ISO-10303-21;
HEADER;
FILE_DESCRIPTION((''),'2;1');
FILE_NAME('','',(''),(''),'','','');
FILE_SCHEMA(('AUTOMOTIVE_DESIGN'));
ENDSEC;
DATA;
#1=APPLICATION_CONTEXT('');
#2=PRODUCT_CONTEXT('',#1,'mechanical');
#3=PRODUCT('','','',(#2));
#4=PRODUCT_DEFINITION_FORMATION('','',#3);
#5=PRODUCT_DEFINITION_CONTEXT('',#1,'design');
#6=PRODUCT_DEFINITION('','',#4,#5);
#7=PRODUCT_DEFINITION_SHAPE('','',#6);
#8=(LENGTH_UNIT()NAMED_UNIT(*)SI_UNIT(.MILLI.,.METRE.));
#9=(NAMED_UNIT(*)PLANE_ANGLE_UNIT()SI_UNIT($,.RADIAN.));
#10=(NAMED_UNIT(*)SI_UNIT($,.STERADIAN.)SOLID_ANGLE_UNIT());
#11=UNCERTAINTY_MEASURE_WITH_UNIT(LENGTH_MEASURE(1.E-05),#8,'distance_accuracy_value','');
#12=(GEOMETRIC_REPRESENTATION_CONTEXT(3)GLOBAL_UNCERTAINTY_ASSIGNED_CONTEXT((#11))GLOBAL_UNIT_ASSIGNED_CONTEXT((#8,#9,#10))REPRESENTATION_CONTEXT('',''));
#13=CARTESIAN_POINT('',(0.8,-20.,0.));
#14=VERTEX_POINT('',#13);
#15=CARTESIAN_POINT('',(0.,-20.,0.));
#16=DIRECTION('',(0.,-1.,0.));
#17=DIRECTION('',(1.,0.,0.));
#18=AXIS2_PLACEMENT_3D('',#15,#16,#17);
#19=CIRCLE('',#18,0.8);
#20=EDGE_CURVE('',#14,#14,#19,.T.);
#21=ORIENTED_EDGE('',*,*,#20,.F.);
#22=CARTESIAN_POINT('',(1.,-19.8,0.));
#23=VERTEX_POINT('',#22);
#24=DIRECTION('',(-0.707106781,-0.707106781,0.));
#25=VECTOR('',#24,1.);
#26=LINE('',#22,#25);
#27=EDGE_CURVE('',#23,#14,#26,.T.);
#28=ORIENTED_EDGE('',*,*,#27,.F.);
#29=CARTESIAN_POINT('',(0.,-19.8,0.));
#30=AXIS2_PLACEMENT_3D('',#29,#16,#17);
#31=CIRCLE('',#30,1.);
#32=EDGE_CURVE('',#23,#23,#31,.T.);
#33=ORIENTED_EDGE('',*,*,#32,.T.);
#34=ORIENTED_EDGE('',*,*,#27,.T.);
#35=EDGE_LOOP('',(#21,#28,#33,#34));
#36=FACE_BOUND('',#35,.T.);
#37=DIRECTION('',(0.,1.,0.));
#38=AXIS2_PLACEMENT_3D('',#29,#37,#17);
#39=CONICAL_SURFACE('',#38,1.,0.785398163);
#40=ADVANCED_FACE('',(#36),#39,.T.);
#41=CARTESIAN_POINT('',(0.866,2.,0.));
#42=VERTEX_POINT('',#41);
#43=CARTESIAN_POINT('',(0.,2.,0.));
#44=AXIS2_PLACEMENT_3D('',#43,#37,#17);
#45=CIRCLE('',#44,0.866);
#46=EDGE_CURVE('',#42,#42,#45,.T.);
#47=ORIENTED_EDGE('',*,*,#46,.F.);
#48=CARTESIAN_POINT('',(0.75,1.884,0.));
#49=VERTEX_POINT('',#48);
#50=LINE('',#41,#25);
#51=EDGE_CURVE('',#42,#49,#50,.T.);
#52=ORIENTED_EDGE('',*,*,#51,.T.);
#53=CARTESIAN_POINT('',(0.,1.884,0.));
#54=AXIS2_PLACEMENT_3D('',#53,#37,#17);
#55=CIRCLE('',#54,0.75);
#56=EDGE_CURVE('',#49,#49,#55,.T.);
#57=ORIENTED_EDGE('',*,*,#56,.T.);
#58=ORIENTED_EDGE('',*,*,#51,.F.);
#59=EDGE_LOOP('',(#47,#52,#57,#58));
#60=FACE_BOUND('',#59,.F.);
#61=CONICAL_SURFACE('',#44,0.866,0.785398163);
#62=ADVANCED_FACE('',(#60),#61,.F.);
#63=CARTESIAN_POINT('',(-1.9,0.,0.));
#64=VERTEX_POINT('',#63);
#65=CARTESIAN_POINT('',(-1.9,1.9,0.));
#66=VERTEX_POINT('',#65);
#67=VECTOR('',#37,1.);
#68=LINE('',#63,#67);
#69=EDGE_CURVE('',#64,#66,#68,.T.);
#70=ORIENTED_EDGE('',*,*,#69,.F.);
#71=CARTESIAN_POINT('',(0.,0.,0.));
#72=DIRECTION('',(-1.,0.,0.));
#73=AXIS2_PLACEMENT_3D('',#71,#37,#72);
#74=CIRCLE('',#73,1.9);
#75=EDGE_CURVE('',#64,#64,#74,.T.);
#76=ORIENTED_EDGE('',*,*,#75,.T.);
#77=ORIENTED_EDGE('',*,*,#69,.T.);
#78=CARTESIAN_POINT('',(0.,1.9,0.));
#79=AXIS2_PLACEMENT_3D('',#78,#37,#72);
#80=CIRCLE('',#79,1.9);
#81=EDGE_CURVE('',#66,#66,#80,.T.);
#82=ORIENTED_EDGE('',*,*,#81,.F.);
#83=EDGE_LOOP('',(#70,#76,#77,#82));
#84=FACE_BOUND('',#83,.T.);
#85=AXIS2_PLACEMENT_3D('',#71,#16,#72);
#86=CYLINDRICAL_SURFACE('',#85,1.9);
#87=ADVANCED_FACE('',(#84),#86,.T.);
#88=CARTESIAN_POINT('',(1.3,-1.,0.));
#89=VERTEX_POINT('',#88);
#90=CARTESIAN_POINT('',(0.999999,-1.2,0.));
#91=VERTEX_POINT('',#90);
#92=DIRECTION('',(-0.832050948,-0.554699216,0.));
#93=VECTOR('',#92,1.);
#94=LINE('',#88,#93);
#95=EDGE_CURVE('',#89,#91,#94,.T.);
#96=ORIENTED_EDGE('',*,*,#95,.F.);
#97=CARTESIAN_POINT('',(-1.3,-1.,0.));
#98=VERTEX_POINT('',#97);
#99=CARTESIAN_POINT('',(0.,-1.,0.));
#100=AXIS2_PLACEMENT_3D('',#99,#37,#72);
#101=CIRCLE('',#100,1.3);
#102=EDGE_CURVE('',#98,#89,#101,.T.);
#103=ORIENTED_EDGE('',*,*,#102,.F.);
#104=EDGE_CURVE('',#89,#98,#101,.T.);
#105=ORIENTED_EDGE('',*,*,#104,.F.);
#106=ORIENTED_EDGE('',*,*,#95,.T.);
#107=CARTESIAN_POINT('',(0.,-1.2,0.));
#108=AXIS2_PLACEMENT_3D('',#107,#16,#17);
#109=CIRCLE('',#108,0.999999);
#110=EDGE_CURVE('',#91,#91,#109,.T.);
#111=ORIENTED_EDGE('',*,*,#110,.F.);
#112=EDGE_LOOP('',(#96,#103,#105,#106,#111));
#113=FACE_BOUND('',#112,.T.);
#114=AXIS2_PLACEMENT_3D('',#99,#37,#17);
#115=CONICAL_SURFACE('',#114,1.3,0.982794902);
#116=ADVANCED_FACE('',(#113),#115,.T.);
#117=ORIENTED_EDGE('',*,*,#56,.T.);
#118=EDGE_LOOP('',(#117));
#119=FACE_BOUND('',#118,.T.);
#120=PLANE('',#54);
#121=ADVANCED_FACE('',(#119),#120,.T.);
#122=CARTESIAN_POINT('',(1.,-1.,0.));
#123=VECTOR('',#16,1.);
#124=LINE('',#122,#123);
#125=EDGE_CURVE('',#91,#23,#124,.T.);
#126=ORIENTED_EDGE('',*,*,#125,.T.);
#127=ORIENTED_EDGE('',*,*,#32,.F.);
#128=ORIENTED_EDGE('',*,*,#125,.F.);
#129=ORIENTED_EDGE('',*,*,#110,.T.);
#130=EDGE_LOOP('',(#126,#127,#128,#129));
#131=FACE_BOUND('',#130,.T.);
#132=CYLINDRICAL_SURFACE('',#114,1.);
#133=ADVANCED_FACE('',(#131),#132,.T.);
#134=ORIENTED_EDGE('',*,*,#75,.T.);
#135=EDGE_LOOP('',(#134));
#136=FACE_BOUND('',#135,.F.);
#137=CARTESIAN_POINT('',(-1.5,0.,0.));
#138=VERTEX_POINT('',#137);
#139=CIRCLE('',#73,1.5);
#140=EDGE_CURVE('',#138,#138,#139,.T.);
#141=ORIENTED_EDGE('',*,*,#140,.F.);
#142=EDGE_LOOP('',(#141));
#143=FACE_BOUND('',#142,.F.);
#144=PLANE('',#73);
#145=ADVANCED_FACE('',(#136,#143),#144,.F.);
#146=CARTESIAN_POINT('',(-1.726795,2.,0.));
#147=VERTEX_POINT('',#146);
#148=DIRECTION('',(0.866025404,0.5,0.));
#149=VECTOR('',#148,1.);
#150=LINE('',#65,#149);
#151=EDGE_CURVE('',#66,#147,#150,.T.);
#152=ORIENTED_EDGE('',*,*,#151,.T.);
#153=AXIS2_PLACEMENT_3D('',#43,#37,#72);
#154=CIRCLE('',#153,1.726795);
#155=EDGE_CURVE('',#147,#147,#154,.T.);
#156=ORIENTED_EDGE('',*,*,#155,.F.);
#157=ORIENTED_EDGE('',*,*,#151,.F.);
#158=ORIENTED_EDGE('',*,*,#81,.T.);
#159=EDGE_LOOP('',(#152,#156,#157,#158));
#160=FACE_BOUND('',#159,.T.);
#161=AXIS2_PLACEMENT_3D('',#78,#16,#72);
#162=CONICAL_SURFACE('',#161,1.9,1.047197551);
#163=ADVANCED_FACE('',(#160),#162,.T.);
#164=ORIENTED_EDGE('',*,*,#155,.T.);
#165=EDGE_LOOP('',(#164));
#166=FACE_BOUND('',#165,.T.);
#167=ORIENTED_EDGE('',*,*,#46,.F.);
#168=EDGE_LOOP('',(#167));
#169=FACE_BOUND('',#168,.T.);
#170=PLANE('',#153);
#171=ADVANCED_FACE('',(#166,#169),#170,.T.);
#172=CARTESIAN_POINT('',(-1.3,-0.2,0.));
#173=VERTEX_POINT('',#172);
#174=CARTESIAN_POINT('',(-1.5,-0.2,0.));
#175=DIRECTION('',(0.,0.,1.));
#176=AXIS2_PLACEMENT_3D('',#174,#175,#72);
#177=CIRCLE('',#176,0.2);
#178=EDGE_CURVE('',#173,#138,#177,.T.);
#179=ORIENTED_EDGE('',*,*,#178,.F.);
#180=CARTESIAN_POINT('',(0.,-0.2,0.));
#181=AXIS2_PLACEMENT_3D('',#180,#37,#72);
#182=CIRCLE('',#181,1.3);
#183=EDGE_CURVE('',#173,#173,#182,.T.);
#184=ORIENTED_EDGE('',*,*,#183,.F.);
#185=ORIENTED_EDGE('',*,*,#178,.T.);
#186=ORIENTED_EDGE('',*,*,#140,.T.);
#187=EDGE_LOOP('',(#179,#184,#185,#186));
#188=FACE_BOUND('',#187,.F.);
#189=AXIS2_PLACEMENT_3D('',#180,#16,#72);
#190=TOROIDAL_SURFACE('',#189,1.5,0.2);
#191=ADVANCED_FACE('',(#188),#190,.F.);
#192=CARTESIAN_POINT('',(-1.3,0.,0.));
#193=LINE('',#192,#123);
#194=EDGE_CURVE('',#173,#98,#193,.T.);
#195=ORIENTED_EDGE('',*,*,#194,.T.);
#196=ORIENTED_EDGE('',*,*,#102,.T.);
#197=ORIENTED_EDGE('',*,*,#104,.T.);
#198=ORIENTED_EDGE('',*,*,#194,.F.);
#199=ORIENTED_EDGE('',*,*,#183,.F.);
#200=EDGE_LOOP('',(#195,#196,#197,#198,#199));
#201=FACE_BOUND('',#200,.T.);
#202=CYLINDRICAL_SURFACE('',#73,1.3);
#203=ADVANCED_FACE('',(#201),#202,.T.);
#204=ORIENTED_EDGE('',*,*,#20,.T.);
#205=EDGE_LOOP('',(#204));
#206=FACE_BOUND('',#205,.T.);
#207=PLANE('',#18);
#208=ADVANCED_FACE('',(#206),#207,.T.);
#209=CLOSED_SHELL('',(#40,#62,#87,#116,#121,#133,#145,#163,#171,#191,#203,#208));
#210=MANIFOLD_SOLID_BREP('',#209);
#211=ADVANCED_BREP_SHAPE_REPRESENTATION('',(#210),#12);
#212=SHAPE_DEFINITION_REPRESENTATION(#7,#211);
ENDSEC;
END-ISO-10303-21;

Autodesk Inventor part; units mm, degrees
ref_plane "YZ Plane" through (0, 0, 0) normal (1, 0, 0) x (0, 1, 0)
sketch "Sketch11" plane through (0, 0, 0) normal (0, 1, 0) x (-1, 0, 0)
  circle A0 centre (0, 0) radius 1.9
  dimension "d86" = 3.8
sketch "Sketch12" plane through (0, 0, 0) normal (0, 1, 0) x (-1, 0, 0)
  circle A0 centre (0, 0) radius 1.3
  dimension "d87" = 2.6
ref_plane "Work Plane4" through (0, 2, 0) normal (0, 1, 0) x (-1, 0, 0)
ref_plane "Work Plane5" through (0, 1.9, 0) normal (0, 1, 0) x (-1, 0, 0)
extrude "Head" add sketch "Sketch11" along normal blind 2
chamfer "Chamfer3" distance 0.1 angle 60 1 edges at (1.9, 2, 0) measured on face at (-1.8938, 1.3333, -0.1529)
sketch "Sketch6" plane through (0, 1.9, 0) normal (0, 1, 0) x (1, 0, 0)
  line L0 (0, 0) -> (-1.9, 0) construction
  line L1 (0, 0) -> (-2, 0) construction
  line L2 (-2, 0) -> (-2, 0.2)
  line L3 (-2, 0) -> (-2, -0.2)
  line L4 (-2, -0.2) -> (-1.8894, -0.2)
  line L5 (-2, 0.2) -> (-1.8894, 0.2)
  line L6 (-1.8894, -0.2) -> (-1.8894, 0.2)
  circle A0 centre (0, 0) radius 1.9 construction
  dimension "d34" = 1.9
  dimension "d35" = 2
  dimension "d36" = 0.2
  dimension "d37" = 0.2
  dimension "d40" = 0.1106
  dimension "d75" = 3.8
extrude "Grip Knurling" [suppressed]
fillet "Fillet3" [suppressed]
pattern_circular "Circular Pattern1" [suppressed]
pattern_circular "Circular Pattern2" [suppressed]
sketch "Label" plane through (0, 2, 0) normal (0, 1, 0) x (-1, 0, 0)
  circle A0 centre (0, 0) radius 0.866
  circle A1 centre (0, 0) radius 1.7268 projected
  dimension "shaftDiameter" = 2
  dimension "transitionDiameter" = 2.6
  dimension "d109" = 1.7321
feature "Bolt Designation" [suppressed]
sketch "Sketch2" plane through (0, 2, 0) normal (0, 1, 0) x (1, 0, 0)
  line L0 (0.75, -0.433) -> (0, -0.866)
  line L1 (0, -0.866) -> (-0.75, -0.433)
  line L2 (-0.75, -0.433) -> (-0.75, 0.433)
  line L3 (-0.75, 0.433) -> (0, 0.866)
  line L4 (0, 0.866) -> (0.75, 0.433)
  line L5 (0.75, 0.433) -> (0.75, -0.433)
  line L6 (-0.75, -0.433) -> (0.75, 0.433) construction
  point P0 (0, 0)
  point P1 (0, 0)
  dimension "d8" = 1.5
  dimension "d24" = 1.7321
  dimension "d85" = 0.866
extrude "HexagonSocket" [suppressed]
sketch "Sketch4" plane through (0, 2, 0) normal (0, 1, 0) x (1, 0, 0)
  circle A0 centre (0, 0) radius 0.866
  dimension "d25" = 1.7321
extrude "Socket_topTaper" cut sketch "Sketch4" against normal blind 0.116 draft -45
ref_plane "Work Plane8" through (0, 0.8, 0) normal (0, 1, 0) x (1, 0, 0)
sketch "Sketch10" plane through (0, 0.8, 0) normal (0, 1, 0) x (1, 0, 0)
  circle A0 centre (0, 0) radius 0.433
  dimension "d70" = 0.866
feature "Socket_bottomTaper" [suppressed]
extrude "Transition" add sketch "Sketch12" against normal blind 1
ref_plane "Work Plane9" through (0, -1, 0) normal (0, 1, 0) x (-1, 0, 0)
sketch "Sketch18" plane through (0, -1, 0) normal (0, -1, 0) x (1, 0, 0)
  circle A0 centre (0, 0) radius 1.3 projected
extrude "Extruded Angle" add sketch "Sketch18" along normal blind 0.2 draft -56.31
sketch "Sketch19" plane through (0, -1.2, 0) normal (0, -1, 0) x (1, 0, 0)
  circle A0 centre (0, 0) radius 1 projected
sketch "Sketch13" plane through (0, -1, 0) normal (0, -1, 0) x (1, 0, 0)
  circle A0 centre (0, 0) radius 1
  dimension "d92" = 2
extrude "Shaft" add sketch "Sketch13" along normal blind 19
fillet "Fillet4" radius 0.2 1 edges at (1.3, 0, 0)
chamfer "Chamfer4" distance 0.2 angle 45 1 edges at (-1, -20, 0)
thread "Thread1" size "M2x0.4" class "6g" standard "ISO Metric profile" full length
sketch "Sketch7" plane through (0, 0, 0) normal (0, 0, 1) x (1, 0, 0)
  line L0 (-1, 0.2) -> (1, 0.2) construction
  line L1 (-1, -20.4) -> (-0.7393, -20.5505)
  line L2 (-0.7393, -20.6495) -> (-1, -20.8)
  line L3 (-1, -20.8) -> (-1, -20.4)
  arc A0 (-0.7393, -20.6495) -> (-0.7393, -20.5505) centre (-0.7679, -20.6) ccw
  line L4 (-1, -19.8) -> (1, -19.8) projected
  point P0 (0, 0)
  point P1 (-0.8845, -20.6)
  point P2 (-0.6536, -20.6)
  dimension "d53" = 0.4
  dimension "d56" = 0.0571
  dimension "d124" = 0.6
  dimension "d125" = 0
feature "ModeledThreads" [suppressed]
extrude "Extrusion10" add sketch "Sketch19" against normal blind 1
equation "\"shaftDiameter\" = 2"
equation "\"transitionDiameter\" = 2.6"
equation "\"flangeCoupling_mountHoleDiameter\" = 3.9"
equation "\"headHeight\" = 2"
equation "\"headDiameter\" = 3.8"
equation "\"gap\" = 0.1"
equation "\"airgap\" = 0.4"
equation "\"wallgap\" = 2"
equation "\"printingLayerHeight\" = 0.2"
equation "\"driveMagnet_height\" = 5"
equation "\"halbachMagnet_height\" = 3"
equation "\"rotorBandBolt_diameter\" = 2"
equation "\"rotorBandBolt_headDiameter\" = 3.98"
equation "\"rotorBandBolt_headHeight\" = 2"
equation "\"rotorBandHexNut_sideToSide\" = 4"
equation "\"rotorBandHexNut_height\" = 1.2"
equation "\"rotorBandSquareNut_sideLength\" = 4"
equation "\"rotorBandSquareNut_height\" = 1.2"
equation "\"sensorMagnet_diameter\" = 5"
equation "\"sensorMagnet_height\" = 2.66667"
equation "\"sensorMagnet_ringRadius\" = 0.5 * driveMagnet_centerSpacingRadius + 2 * wallgap"
equation "\"rotorRadius\" = 2 * gap + driveMagnet_centerSpacingRadius + driveMagnet_length + wallgap"
equation "\"rotor_mountingLipHeight\" = 0.5 * statorThickness"
equation "\"flangeBearing_innerDiameter\" = shaftDiameter"
equation "\"flangeBearing_outerDiameter\" = 16"
equation "\"flangeBearing_flangeDiameter\" = 18"
equation "\"flangeBearing_height\" = 5"
equation "\"flangeBearing_flangeHeight\" = 1"
equation "\"magnetWire_outerDiameter\" = 0.8128"
equation "\"coilThickness\" = 12"
equation "\"statorThickness\" = coilThickness + 2 * wallgap"
equation "\"rotorBandThickness\" = wallgap + rotorBandBolt_headHeight + gap"
equation "\"flangeCoupling_innerDiameter\" = shaftDiameter"
equation "\"flangeCoupling_collarOuterDiameter\" = 16"
equation "\"flangeCoupling_flangeDiameter\" = 32"
equation "\"flangeCoupling_flangeHeight\" = 3.1"
equation "\"flangeCoupling_height\" = flangeCoupling_collarHeight + flangeCoupling_flangeHeight"
equation "\"flangeCoupling_mountHoleEdgeToEdge\" = 2.05"
equation "\"statorRadius\" = driveMagnet_length + driveMagnet_centerSpacingRadius + 2 * gap"
equation "\"statorMountBolt_diameter\" = 4"
equation "\"statorMountBolt_headDiameter\" = 7"
equation "\"statorMountBolt_headHeight\" = 4"
equation "\"statorMountBolt_shaftLength\" = coilThickness + flangeCoupling_flangeHeight + wallgap"
equation "\"statorMountHexNut_sideToSide\" = 8"
equation "\"statorMountHexNut_height\" = 4"
equation "\"coil_percentCoverage\" = 0.6"
equation "\"statorSpokeDegrees\" = 4deg"
equation "\"statorCoilBolt_diameter\" = 2"
equation "\"statorCoilBolt_headDiameter\" = 3.98"
equation "\"statorCoilBolt_headHeight\" = 2"
equation "\"statorCoilBolt_shaftLength\" = coilThickness"
equation "\"statorCoilHexNut_sideToSide\" = 4"
equation "\"statorCoilHexNut_height\" = 1.2"
equation "\"circuitBoard_height\" = 1.6"
equation "\"hallEffectSensor_height\" = 1.1"
equation "\"hallEffectSensor_length\" = 3"
equation "\"hallEffectSensor_width\" = 1.6"
equation "\"hallEffectSensor_pinLength\" = 0.6"
equation "\"circuitboardMountBolt_diameter\" = 2"
equation "\"circuitboardMountBolt_headDiameter\" = 3.98"
equation "\"circuitboardMountBolt_headHeight\" = 2"
equation "\"circuitboardMountBolt_shaftLength\" = coilThickness"
equation "\"circuitboardMountHexNut_sideToSide\" = 4"
equation "\"circuitboardMountHexNut_height\" = 1.2"
equation "\"statorShellBolt_diameter\" = 3"
equation "\"statorShellBolt_headDiameter\" = 5.68"
equation "\"statorShellBolt_headHeight\" = 3"
equation "\"statorShellBolt_shaftLength\" = statorThickness - statorShellBolt_countersinkDepth"
equation "\"statorShellHexNut_sideToSide\" = 5.3"
equation "\"statorShellHexNut_height\" = 2.3"
equation "\"threadPitch\" = 0.4"
equation "\"socketSize\" = 1.5"
equation "\"chamferSize\" = 0.2"
equation "\"keyEngagementDepth\" = 1"
equation "\"transitionLength\" = 1"
equation "\"textSize\" = 0.95"
equation "\"driveMagnet_centerSpacingRadius\" = 38.96113"
equation "\"driveMagnet_length\" = 60"
equation "\"flangeCoupling_collarHeight\" = 10"
equation "\"statorShellBolt_countersinkDepth\" = 3.4"
properties part number "M2" material "Steel, Galvanized"
